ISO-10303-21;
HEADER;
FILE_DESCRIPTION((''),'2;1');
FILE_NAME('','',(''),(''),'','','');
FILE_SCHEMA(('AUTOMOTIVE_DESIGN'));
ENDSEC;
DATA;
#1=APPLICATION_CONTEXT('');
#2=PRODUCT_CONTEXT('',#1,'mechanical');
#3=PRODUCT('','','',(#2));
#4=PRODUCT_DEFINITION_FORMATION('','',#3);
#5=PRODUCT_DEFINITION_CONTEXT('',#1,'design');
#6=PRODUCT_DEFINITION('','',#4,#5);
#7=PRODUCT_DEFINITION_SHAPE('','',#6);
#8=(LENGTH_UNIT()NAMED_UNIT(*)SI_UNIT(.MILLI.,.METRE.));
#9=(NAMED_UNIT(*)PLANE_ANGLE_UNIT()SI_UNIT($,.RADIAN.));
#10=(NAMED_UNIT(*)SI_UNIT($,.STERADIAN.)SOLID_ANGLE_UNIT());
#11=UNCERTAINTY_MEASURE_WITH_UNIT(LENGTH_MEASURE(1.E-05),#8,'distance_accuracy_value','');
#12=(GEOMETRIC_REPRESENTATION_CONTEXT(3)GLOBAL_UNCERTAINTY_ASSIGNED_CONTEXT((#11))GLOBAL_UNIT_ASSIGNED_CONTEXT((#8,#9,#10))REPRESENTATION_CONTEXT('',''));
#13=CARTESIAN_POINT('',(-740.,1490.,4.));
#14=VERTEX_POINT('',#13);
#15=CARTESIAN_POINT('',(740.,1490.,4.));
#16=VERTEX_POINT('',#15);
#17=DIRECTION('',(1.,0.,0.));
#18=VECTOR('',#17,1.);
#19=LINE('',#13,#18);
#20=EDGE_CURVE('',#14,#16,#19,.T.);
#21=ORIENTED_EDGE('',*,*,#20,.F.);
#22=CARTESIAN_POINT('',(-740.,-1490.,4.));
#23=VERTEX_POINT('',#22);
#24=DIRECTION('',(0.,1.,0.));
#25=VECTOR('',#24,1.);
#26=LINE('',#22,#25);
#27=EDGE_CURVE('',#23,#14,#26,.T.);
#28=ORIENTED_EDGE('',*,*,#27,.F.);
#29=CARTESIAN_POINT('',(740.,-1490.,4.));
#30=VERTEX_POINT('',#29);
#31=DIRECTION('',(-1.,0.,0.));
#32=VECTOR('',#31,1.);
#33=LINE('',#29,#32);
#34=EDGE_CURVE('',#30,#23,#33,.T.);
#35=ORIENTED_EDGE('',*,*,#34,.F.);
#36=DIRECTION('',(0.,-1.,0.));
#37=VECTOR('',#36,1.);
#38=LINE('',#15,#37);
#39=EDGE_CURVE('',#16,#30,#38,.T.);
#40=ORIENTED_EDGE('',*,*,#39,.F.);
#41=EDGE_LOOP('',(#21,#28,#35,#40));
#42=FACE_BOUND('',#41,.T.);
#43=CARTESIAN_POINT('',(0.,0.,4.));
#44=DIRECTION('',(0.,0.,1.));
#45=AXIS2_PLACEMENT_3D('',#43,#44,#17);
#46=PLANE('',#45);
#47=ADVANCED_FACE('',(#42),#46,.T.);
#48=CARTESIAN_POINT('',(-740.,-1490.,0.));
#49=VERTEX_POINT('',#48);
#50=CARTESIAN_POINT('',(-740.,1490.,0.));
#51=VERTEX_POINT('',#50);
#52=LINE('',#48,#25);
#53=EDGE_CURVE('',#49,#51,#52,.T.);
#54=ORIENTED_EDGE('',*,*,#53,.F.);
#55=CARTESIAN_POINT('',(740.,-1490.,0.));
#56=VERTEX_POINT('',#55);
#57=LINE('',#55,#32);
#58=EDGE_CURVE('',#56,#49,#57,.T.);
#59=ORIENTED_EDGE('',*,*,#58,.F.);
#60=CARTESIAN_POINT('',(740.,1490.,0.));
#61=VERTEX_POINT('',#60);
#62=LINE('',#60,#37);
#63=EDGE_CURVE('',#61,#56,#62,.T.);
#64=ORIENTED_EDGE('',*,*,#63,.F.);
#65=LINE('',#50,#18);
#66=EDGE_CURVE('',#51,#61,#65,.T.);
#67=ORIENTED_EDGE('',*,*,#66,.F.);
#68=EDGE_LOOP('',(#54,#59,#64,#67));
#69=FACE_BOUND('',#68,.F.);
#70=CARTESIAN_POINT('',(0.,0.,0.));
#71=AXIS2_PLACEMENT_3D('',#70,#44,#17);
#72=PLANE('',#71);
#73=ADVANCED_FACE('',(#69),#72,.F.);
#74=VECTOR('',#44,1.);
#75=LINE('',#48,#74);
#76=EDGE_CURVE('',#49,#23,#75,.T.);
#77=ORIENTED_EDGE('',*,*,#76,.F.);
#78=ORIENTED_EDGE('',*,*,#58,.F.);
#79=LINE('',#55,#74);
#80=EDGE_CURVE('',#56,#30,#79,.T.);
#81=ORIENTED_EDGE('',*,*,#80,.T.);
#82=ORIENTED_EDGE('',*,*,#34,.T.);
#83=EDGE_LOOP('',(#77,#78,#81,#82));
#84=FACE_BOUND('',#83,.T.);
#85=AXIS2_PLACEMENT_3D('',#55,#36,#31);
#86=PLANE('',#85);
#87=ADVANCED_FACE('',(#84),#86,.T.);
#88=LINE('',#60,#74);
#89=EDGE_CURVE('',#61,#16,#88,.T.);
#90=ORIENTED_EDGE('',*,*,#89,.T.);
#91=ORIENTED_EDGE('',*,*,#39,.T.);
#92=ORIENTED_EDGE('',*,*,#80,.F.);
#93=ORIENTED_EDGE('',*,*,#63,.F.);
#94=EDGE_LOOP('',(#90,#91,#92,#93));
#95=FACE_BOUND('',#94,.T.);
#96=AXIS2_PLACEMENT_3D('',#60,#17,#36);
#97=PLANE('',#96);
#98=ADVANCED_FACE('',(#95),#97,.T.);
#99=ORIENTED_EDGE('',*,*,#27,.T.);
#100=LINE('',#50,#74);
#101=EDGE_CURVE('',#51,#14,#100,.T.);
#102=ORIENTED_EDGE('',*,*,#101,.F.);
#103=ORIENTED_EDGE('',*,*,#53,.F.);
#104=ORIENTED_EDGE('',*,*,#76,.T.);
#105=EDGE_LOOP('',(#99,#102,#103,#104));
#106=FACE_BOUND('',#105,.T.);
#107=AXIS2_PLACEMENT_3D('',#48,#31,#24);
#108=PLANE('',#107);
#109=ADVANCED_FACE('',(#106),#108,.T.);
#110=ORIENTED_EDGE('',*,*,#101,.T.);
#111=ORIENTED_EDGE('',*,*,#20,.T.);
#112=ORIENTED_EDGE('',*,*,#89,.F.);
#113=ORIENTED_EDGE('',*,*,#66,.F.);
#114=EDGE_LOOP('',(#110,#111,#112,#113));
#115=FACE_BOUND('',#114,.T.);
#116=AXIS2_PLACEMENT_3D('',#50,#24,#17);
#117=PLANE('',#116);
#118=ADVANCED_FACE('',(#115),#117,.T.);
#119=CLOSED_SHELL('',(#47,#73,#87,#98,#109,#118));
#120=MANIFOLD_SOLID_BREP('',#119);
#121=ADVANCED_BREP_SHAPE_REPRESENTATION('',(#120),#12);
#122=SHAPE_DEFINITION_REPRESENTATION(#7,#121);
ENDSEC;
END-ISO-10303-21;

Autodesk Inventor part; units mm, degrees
ref_plane "YZ Plane" through (0, 0, 0) normal (1, 0, 0) x (0, 1, 0)
ref_plane "XZ Plane" through (0, 0, 0) normal (0, 1, 0) x (-1, 0, 0)
ref_plane "XY Plane" through (0, 0, 0) normal (0, 0, 1) x (1, 0, 0)
sketch "Sketch1" plane through (0, 0, 0) normal (0, 0, 1) x (1, 0, 0)
  line L0 (740, -1490) -> (-740, -1490)
  line L1 (-740, -1490) -> (-740, 1490)
  line L2 (-740, 1490) -> (740, 1490)
  line L3 (740, 1490) -> (740, -1490)
  line L4 (740, -1490) -> (-740, 1490) construction
  line L5 (-740, -1490) -> (740, 1490) construction
  point P0 (0, 0)
  dimension "d0" = 1480
  dimension "d1" = 2980
extrude "Plate1" add sketch "Sketch1" along normal blind 4
sketch "Эскиз3" plane through (0, 0, 0) normal (0, 0, -1) x (-1, 0, 0)
  line L0 (567.5874, -1279.3136) -> (567.5874, -1777.4498) construction
  line L1 (567.5874, -1777.4498) -> (527.9602, -1777.4498) construction
  line L2 (527.9602, -1777.4498) -> (527.9602, -1279.3136) construction
  line L3 (527.9602, -1279.3136) -> (567.5874, -1279.3136) construction
  line L4 (209.363, -1238) -> (209.363, -1335) projected
  line L5 (209.363, -1335) -> (205.363, -1335) projected
  line L6 (-290.5101, -1238) -> (-290.5101, -1335) projected
  line L7 (-290.5101, -1335) -> (-294.5101, -1335) projected
  line L8 (-290.5101, 1460.5) -> (-290.5101, 1520.5) projected
  line L9 (-290.5101, 1460.5) -> (-294.5101, 1460.5) projected
  line L10 (209.363, 1460.5) -> (209.363, 1520.5) projected
  line L11 (209.363, 1460.5) -> (205.363, 1460.5) projected
  line L12 (739.6246, -1234.5) -> (739.6246, -1230.5) projected
  line L13 (-740, -1234.5) -> (-710, -1234.5) projected
  line L14 (-710, -1234.5) -> (-710, -1230.5) projected
  line L15 (-740, -737.8333) -> (-710, -737.8333) projected
  line L16 (-710, -737.8333) -> (-710, -733.8333) projected
  line L17 (-740, -241.1667) -> (-710, -241.1667) projected
  line L18 (-710, -241.1667) -> (-710, -237.1667) projected
  line L19 (-740, 255.5) -> (-710, 255.5) projected
  line L20 (-710, 255.5) -> (-710, 259.5) projected
  line L21 (-740, 752.1667) -> (-710, 752.1667) projected
  line L22 (-710, 752.1667) -> (-710, 756.1667) projected
  line L23 (-740, 1248.8333) -> (-710, 1248.8333) projected
  line L24 (-710, 1248.8333) -> (-710, 1252.8333) projected
  line L25 (739.6246, -737.8333) -> (739.6246, -733.8333) projected
  line L26 (739.6246, -241.1667) -> (739.6246, -237.1667) projected
  line L27 (739.6246, 255.5) -> (739.6246, 259.5) projected
  line L28 (739.6246, 752.1667) -> (739.6246, 756.1667) projected
  line L29 (739.6246, 1248.8333) -> (739.6246, 1252.8333) projected
  line L30 (739.6246, 1248.8333) -> (709.6246, 1248.8333)
  line L31 (739.6246, 752.1667) -> (709.6246, 752.1667)
  line L32 (739.6246, 255.5) -> (709.6246, 255.5)
  line L33 (739.6246, -241.1667) -> (709.6246, -241.1667)
  line L34 (739.6246, -737.8333) -> (709.6246, -737.8333)
  line L35 (739.6246, -1234.5) -> (709.6246, -1234.5)
  point P0 (0, 0)
  dimension "d12" = 30
  dimension "d13" = 30
  dimension "d14" = 30
  dimension "d15" = 30
  dimension "d16" = 30
  dimension "d17" = 30
mark "Маркировка2"
equation "\"d0\" = Лист_ширина"
equation "\"d2\" = Thickness"
equation "\"BendRadius\" = Thickness"
equation "\"BendReliefWidth\" = Thickness"
equation "\"BendReliefDepth\" = 0.5 * Thickness"
equation "\"CornerReliefSize\" = 4 * Thickness"
equation "\"MinimumRemnant\" = 2 * Thickness"
equation "\"TransitionRadius\" = BendRadius"
equation "\"JacobiRadiusSize\" = BendRadius"
equation "\"GapSize\" = Thickness"
equation "\"Лист_ширина\" = 1480"
equation "\"Thickness\" = 4"
properties part number "GBK 3328 shield 8" material "Steel"
